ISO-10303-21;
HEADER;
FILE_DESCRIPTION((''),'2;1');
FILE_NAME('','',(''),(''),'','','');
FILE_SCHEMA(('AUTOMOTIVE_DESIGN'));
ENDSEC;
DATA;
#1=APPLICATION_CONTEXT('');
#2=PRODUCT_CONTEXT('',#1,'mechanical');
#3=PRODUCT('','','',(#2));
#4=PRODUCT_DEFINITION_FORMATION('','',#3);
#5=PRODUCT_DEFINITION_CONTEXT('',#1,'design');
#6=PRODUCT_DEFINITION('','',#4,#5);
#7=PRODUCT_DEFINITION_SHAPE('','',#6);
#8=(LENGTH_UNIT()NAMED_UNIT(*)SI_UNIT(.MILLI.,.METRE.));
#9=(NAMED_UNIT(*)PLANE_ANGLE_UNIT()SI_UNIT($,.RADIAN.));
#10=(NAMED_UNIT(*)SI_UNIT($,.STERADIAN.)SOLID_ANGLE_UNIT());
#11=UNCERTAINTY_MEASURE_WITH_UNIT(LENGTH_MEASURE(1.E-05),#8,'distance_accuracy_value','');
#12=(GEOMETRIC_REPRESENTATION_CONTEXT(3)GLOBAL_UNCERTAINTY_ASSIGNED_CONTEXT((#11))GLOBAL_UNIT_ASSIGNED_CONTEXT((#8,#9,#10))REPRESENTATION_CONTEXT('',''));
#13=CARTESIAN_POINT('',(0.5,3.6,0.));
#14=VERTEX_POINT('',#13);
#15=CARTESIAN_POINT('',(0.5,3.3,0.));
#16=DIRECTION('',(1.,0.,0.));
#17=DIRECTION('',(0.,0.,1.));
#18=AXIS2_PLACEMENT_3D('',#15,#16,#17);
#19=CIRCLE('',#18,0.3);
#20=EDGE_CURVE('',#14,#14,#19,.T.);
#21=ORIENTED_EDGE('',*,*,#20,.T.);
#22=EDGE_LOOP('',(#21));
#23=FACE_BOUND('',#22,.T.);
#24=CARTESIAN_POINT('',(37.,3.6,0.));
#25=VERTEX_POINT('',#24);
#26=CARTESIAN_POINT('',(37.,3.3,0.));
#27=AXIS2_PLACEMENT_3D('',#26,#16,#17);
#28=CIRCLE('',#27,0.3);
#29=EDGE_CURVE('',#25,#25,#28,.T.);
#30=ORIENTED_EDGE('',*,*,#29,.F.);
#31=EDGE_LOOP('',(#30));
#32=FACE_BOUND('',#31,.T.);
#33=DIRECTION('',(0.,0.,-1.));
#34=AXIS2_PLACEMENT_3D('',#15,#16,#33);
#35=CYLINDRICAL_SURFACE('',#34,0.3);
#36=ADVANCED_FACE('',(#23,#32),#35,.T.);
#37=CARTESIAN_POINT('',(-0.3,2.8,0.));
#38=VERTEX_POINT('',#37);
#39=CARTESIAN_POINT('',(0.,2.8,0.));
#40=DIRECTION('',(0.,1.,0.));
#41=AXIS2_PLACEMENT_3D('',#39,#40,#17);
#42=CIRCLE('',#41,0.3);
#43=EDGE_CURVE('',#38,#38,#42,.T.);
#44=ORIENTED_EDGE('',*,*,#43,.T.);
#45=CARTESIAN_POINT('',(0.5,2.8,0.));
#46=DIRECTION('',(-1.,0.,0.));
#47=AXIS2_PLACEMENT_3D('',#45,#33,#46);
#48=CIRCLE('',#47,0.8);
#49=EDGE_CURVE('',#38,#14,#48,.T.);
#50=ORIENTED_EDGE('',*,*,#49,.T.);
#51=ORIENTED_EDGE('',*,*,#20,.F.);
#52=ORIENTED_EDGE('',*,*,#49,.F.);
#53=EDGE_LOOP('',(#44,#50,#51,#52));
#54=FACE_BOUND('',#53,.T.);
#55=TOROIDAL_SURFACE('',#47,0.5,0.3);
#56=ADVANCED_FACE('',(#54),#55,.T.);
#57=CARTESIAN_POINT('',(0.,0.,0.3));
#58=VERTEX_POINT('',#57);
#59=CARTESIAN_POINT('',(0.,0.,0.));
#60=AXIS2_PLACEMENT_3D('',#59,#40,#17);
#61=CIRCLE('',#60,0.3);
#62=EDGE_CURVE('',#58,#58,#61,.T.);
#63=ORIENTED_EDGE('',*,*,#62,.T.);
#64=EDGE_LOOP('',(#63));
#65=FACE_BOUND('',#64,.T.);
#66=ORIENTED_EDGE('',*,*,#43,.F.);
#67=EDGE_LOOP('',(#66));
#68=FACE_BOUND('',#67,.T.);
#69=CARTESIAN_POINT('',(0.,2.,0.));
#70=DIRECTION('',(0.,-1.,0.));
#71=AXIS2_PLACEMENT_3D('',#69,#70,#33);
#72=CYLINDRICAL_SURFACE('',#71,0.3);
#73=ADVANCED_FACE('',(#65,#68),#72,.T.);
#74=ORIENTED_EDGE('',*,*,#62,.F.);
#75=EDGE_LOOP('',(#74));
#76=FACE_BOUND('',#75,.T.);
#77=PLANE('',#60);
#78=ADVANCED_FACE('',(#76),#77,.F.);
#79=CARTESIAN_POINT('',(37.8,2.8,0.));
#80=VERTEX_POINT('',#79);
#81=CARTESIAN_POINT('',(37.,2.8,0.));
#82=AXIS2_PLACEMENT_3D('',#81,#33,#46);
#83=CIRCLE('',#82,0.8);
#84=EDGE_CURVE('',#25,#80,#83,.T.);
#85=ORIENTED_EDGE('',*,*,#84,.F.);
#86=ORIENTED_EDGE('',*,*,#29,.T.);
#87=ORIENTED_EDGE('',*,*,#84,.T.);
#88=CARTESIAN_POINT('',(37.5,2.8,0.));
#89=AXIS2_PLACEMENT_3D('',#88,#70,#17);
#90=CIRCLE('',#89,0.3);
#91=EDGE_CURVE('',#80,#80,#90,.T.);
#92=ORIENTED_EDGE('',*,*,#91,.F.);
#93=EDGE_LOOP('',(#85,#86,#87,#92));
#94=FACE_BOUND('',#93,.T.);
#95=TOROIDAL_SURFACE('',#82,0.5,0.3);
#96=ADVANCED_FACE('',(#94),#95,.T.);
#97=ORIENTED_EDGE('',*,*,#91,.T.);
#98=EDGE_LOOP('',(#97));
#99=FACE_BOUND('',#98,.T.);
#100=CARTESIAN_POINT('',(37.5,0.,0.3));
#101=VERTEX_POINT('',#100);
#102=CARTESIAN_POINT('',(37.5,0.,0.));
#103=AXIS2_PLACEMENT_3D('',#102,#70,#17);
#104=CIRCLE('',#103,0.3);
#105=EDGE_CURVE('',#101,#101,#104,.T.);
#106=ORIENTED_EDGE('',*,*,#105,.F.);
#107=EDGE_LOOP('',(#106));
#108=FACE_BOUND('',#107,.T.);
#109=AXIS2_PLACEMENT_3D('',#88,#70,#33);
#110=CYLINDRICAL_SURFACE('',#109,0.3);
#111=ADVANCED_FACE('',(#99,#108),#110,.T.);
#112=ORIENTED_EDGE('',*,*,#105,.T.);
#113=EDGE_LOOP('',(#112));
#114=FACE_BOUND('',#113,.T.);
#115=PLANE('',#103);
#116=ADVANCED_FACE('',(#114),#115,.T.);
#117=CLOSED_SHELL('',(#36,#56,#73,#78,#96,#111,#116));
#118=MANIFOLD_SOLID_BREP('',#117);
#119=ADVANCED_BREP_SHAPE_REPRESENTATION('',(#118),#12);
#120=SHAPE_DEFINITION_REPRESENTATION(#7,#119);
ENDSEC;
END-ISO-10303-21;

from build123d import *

# Parameters (mm, degrees)
SKETCH1_R           = 0.3
BOSS_EXTRUDE1_DEPTH = 2
SWEEP1_OUTLINE_R    = 0.3
SWEEP1_DEPTH        = 2.8
SWEEP1_2_OUTLINE_R  = 0.3
SWEEP1_2_ANGLE      = 90
SWEEP1_3_OUTLINE_R  = 0.3
SWEEP1_3_ANGLE      = 90
SWEEP1_START        = 0.4999999
SWEEP1_4_OUTLINE_R  = 0.3
SWEEP1_4_DEPTH      = 36.5000002


with BuildPart() as part:
    # Sketch1 → Boss-Extrude1 (new body)
    with BuildSketch(Plane(origin=(0, 0, 0), x_dir=(1, 0, 0), z_dir=(0, 1, 0))):
        with Locations(Location((0, 0, 0), (0, 0, 270))):
            Circle(SKETCH1_R)
    extrude(amount=BOSS_EXTRUDE1_DEPTH)

    # Sweep1: read off the stored shape, not the designer's step
    # Sweep1 outline → Sweep1 (add)
    with BuildSketch(Plane(origin=(0, 0, 0), x_dir=(1, 0, 0), z_dir=(0, 1, 0))):
        Circle(SWEEP1_OUTLINE_R)
        with Locations((37.5, 0)):
            Circle(SWEEP1_OUTLINE_R)
    extrude(amount=SWEEP1_DEPTH)

    # Sweep1 2 outline → Sweep1 2 (revolve)
    with BuildSketch(Plane(origin=(0.5, 2.8, 0), x_dir=(0, 1, 0), z_dir=(1, 0, 0))):
        with Locations((0.5, 0)):
            Circle(SWEEP1_2_OUTLINE_R)
    revolve(axis=Axis((0.5, 2.8, 0), (0, 0, 1)), revolution_arc=SWEEP1_2_ANGLE)

    # Sweep1 3 outline → Sweep1 3 (revolve)
    with BuildSketch(Plane(origin=(37, 2.8, 0), x_dir=(1, 0, 0), z_dir=(0, -1, 0))):
        with Locations((0.5, 0)):
            Circle(SWEEP1_3_OUTLINE_R)
    revolve(axis=Axis((37, 2.8, 0), (0, 0, 1)), revolution_arc=SWEEP1_3_ANGLE)

    # Sweep1 4 outline → Sweep1 4 (add)
    with BuildSketch(Plane.YZ.offset(SWEEP1_START)):
        with Locations((3.3, 0)):
            Circle(SWEEP1_4_OUTLINE_R)
    extrude(amount=SWEEP1_4_DEPTH)


solid = part.part
